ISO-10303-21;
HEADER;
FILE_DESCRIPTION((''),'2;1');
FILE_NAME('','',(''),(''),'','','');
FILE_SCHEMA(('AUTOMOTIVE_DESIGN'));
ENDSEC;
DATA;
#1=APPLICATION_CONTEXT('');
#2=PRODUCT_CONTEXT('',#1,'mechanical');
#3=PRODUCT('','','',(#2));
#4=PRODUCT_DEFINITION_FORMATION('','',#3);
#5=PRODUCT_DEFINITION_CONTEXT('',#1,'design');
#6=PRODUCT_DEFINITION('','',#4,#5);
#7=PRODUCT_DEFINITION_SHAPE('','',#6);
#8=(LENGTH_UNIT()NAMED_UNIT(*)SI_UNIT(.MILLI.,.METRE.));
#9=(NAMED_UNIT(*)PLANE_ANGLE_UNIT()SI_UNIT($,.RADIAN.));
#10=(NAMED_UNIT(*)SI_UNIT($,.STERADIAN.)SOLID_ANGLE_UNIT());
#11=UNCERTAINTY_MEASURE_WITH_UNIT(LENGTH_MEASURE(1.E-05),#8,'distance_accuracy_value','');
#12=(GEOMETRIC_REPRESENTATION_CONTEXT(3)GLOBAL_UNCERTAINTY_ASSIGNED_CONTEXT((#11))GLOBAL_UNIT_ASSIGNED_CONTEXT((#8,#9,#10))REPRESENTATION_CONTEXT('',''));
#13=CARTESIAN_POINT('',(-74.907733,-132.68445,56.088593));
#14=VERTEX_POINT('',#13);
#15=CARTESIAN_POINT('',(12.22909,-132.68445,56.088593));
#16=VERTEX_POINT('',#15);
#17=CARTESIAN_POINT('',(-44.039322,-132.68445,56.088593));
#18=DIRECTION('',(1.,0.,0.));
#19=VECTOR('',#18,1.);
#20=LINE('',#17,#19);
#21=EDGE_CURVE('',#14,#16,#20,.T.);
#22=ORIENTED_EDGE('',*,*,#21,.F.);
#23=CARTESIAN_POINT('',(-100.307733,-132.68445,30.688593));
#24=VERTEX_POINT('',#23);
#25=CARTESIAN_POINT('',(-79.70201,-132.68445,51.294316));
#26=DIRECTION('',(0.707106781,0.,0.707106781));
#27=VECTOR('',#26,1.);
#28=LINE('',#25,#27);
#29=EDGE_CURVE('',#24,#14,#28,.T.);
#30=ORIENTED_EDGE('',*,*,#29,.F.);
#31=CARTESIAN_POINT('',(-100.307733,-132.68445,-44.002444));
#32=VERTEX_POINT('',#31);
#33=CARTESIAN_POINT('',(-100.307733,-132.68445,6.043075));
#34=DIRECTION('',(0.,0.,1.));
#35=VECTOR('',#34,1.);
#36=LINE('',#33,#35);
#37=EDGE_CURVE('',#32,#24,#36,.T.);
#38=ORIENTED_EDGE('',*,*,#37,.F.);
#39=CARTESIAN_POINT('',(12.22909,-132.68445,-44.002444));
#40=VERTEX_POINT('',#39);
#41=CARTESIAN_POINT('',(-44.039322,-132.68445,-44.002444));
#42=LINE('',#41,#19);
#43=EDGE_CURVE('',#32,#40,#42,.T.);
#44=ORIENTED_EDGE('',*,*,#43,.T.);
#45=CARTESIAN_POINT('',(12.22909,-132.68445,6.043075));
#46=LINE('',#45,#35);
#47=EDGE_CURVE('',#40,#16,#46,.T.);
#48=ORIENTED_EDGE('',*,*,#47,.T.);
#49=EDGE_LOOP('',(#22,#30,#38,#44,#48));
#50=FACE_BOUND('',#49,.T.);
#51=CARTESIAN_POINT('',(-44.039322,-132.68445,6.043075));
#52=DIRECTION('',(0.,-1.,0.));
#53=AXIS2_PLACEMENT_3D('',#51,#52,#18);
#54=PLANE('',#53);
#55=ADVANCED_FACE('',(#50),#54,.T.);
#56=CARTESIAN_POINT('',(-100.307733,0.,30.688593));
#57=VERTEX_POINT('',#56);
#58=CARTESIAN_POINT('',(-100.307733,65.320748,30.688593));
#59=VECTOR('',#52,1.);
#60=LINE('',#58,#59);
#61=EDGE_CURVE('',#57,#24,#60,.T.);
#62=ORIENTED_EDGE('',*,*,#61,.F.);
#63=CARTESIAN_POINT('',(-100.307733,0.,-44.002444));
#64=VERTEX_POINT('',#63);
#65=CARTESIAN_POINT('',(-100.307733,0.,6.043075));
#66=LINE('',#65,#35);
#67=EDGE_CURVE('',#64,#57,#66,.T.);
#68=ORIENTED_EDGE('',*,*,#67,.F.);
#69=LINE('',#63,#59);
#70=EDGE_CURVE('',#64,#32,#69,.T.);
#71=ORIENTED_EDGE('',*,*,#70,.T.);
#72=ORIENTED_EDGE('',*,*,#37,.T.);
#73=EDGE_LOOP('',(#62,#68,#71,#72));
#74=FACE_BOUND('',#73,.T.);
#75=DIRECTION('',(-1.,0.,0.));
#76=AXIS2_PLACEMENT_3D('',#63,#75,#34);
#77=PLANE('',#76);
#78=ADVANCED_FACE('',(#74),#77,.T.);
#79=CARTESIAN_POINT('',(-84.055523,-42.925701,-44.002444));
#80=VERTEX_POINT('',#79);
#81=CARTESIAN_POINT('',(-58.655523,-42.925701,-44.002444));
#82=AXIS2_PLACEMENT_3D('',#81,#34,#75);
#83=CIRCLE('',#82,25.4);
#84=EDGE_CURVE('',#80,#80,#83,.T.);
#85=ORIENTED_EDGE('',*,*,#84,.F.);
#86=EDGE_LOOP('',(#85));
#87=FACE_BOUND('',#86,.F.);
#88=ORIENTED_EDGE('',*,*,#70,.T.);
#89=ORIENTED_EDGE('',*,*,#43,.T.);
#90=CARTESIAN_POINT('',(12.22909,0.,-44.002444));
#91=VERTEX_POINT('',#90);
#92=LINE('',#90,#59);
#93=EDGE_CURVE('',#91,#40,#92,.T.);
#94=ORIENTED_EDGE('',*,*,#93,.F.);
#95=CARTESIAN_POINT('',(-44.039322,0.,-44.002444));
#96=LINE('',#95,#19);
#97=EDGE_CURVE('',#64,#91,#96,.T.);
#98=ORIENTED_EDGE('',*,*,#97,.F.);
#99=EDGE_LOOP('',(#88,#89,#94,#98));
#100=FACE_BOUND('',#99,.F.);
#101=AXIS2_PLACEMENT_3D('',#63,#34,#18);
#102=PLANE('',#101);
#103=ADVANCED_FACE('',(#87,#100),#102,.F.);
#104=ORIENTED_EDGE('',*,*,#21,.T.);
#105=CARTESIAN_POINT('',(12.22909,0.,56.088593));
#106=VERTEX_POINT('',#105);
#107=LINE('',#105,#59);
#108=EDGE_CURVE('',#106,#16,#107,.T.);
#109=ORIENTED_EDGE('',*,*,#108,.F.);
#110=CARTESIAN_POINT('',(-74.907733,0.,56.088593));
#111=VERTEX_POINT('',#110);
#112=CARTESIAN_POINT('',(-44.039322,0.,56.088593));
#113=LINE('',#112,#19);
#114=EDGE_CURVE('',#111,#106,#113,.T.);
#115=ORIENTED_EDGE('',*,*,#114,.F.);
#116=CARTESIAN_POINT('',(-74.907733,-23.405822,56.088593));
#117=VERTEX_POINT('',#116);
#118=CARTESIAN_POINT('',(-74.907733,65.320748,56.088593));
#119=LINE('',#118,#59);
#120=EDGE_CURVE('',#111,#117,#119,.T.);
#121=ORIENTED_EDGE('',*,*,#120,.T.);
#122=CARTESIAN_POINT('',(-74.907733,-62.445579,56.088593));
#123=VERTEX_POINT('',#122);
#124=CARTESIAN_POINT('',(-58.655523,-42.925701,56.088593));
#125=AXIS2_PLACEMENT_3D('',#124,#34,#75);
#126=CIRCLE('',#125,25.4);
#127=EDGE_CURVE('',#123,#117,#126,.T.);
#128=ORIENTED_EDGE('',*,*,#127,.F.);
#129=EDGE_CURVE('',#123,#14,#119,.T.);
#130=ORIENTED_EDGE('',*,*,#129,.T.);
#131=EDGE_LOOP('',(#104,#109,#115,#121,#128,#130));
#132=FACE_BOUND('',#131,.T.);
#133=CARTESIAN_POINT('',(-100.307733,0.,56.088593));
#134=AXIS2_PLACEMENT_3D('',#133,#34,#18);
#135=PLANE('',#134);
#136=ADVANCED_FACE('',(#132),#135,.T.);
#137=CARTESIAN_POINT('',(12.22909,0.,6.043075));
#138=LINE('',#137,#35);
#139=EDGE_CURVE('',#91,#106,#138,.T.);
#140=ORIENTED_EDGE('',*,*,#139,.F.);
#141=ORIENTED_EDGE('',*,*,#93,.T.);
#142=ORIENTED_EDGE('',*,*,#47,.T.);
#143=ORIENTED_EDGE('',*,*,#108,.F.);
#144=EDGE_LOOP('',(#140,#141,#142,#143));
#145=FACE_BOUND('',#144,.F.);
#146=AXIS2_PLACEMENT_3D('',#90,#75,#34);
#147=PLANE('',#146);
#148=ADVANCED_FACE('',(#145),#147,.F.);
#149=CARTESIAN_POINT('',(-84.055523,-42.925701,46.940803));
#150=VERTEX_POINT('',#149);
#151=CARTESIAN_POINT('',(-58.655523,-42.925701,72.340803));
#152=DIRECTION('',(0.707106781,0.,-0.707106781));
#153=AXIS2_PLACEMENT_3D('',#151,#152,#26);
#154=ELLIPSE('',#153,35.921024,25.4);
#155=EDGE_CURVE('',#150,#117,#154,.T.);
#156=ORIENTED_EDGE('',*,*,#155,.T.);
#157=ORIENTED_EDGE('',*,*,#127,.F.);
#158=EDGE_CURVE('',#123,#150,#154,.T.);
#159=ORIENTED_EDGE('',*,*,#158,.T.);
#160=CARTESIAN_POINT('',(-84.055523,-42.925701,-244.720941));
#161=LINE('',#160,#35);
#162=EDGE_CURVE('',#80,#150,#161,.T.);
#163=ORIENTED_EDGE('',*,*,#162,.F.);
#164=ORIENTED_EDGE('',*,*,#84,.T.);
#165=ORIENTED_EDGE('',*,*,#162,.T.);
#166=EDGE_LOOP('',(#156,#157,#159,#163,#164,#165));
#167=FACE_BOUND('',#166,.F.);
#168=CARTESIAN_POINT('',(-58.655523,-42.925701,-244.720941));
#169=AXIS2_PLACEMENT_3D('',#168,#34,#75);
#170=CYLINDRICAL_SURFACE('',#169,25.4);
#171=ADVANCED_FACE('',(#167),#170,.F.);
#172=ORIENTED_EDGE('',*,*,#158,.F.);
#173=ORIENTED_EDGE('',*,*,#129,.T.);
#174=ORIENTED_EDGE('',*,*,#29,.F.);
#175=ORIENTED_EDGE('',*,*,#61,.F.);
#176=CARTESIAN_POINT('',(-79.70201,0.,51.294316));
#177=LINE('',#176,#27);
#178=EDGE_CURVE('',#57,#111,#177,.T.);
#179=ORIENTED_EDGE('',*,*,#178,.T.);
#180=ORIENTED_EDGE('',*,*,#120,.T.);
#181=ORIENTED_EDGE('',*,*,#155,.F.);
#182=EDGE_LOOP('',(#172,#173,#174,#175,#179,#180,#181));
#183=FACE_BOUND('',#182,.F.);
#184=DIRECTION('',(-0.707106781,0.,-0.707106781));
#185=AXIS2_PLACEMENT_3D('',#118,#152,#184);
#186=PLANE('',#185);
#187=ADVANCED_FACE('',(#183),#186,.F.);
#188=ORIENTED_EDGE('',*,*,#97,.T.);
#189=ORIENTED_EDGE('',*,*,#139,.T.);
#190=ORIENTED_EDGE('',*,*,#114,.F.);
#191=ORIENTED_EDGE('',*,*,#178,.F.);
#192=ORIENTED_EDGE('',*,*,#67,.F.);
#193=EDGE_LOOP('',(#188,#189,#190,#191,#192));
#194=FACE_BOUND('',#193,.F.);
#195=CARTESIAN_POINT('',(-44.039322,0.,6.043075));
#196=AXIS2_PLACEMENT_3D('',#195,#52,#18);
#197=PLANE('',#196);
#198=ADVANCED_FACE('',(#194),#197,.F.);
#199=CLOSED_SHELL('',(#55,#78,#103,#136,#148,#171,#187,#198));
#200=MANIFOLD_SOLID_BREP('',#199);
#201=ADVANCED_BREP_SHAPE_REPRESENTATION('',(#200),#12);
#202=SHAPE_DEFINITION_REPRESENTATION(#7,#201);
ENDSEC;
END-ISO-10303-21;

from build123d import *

# Parameters (mm, degrees)
F0_W        = 112.5368224457
F0_H        = 100.0910364091
F1_DEPTH    = 132.68445
F3_D        = 50.8
F4_T1_DEPTH = 263.3259457887


# Not quite as in the source:
# - a fillet or chamfer that OpenCascade refuses, or shapes differently, is made with other operations: its cross-section is extruded or revolved along the edge and cut away or added


with BuildPart() as f1:
    # F0 (on Front) → F1 (new body)
    with BuildSketch(Plane.XZ):
        with Locations((-44.0393215977, 6.0430746526)):
            Rectangle(F0_W, F0_H)
    extrude(amount=F1_DEPTH)

    # F3 (through all)
    with Locations(Plane(origin=(0, 0, -44.002443552), x_dir=(1, 0, 0), z_dir=(0, 0, -1))):
        with Locations((-58.6555227637, 42.9257005453)):
            Hole(F3_D / 2)

    # F4: chamfer of 25.4 on 1 edges, made by hand

    # F4_s2 → F4_t1 (cut)
    with BuildSketch(Plane.XZ.offset(-65.3207478943)):
        Polygon((-74.9077328205, 56.0885928571), (-100.3077328205, 30.6885928571), (-100.3077328205, 56.0885928571), align=None)
    extrude(amount=F4_T1_DEPTH, mode=Mode.SUBTRACT)


solid = f1.part
